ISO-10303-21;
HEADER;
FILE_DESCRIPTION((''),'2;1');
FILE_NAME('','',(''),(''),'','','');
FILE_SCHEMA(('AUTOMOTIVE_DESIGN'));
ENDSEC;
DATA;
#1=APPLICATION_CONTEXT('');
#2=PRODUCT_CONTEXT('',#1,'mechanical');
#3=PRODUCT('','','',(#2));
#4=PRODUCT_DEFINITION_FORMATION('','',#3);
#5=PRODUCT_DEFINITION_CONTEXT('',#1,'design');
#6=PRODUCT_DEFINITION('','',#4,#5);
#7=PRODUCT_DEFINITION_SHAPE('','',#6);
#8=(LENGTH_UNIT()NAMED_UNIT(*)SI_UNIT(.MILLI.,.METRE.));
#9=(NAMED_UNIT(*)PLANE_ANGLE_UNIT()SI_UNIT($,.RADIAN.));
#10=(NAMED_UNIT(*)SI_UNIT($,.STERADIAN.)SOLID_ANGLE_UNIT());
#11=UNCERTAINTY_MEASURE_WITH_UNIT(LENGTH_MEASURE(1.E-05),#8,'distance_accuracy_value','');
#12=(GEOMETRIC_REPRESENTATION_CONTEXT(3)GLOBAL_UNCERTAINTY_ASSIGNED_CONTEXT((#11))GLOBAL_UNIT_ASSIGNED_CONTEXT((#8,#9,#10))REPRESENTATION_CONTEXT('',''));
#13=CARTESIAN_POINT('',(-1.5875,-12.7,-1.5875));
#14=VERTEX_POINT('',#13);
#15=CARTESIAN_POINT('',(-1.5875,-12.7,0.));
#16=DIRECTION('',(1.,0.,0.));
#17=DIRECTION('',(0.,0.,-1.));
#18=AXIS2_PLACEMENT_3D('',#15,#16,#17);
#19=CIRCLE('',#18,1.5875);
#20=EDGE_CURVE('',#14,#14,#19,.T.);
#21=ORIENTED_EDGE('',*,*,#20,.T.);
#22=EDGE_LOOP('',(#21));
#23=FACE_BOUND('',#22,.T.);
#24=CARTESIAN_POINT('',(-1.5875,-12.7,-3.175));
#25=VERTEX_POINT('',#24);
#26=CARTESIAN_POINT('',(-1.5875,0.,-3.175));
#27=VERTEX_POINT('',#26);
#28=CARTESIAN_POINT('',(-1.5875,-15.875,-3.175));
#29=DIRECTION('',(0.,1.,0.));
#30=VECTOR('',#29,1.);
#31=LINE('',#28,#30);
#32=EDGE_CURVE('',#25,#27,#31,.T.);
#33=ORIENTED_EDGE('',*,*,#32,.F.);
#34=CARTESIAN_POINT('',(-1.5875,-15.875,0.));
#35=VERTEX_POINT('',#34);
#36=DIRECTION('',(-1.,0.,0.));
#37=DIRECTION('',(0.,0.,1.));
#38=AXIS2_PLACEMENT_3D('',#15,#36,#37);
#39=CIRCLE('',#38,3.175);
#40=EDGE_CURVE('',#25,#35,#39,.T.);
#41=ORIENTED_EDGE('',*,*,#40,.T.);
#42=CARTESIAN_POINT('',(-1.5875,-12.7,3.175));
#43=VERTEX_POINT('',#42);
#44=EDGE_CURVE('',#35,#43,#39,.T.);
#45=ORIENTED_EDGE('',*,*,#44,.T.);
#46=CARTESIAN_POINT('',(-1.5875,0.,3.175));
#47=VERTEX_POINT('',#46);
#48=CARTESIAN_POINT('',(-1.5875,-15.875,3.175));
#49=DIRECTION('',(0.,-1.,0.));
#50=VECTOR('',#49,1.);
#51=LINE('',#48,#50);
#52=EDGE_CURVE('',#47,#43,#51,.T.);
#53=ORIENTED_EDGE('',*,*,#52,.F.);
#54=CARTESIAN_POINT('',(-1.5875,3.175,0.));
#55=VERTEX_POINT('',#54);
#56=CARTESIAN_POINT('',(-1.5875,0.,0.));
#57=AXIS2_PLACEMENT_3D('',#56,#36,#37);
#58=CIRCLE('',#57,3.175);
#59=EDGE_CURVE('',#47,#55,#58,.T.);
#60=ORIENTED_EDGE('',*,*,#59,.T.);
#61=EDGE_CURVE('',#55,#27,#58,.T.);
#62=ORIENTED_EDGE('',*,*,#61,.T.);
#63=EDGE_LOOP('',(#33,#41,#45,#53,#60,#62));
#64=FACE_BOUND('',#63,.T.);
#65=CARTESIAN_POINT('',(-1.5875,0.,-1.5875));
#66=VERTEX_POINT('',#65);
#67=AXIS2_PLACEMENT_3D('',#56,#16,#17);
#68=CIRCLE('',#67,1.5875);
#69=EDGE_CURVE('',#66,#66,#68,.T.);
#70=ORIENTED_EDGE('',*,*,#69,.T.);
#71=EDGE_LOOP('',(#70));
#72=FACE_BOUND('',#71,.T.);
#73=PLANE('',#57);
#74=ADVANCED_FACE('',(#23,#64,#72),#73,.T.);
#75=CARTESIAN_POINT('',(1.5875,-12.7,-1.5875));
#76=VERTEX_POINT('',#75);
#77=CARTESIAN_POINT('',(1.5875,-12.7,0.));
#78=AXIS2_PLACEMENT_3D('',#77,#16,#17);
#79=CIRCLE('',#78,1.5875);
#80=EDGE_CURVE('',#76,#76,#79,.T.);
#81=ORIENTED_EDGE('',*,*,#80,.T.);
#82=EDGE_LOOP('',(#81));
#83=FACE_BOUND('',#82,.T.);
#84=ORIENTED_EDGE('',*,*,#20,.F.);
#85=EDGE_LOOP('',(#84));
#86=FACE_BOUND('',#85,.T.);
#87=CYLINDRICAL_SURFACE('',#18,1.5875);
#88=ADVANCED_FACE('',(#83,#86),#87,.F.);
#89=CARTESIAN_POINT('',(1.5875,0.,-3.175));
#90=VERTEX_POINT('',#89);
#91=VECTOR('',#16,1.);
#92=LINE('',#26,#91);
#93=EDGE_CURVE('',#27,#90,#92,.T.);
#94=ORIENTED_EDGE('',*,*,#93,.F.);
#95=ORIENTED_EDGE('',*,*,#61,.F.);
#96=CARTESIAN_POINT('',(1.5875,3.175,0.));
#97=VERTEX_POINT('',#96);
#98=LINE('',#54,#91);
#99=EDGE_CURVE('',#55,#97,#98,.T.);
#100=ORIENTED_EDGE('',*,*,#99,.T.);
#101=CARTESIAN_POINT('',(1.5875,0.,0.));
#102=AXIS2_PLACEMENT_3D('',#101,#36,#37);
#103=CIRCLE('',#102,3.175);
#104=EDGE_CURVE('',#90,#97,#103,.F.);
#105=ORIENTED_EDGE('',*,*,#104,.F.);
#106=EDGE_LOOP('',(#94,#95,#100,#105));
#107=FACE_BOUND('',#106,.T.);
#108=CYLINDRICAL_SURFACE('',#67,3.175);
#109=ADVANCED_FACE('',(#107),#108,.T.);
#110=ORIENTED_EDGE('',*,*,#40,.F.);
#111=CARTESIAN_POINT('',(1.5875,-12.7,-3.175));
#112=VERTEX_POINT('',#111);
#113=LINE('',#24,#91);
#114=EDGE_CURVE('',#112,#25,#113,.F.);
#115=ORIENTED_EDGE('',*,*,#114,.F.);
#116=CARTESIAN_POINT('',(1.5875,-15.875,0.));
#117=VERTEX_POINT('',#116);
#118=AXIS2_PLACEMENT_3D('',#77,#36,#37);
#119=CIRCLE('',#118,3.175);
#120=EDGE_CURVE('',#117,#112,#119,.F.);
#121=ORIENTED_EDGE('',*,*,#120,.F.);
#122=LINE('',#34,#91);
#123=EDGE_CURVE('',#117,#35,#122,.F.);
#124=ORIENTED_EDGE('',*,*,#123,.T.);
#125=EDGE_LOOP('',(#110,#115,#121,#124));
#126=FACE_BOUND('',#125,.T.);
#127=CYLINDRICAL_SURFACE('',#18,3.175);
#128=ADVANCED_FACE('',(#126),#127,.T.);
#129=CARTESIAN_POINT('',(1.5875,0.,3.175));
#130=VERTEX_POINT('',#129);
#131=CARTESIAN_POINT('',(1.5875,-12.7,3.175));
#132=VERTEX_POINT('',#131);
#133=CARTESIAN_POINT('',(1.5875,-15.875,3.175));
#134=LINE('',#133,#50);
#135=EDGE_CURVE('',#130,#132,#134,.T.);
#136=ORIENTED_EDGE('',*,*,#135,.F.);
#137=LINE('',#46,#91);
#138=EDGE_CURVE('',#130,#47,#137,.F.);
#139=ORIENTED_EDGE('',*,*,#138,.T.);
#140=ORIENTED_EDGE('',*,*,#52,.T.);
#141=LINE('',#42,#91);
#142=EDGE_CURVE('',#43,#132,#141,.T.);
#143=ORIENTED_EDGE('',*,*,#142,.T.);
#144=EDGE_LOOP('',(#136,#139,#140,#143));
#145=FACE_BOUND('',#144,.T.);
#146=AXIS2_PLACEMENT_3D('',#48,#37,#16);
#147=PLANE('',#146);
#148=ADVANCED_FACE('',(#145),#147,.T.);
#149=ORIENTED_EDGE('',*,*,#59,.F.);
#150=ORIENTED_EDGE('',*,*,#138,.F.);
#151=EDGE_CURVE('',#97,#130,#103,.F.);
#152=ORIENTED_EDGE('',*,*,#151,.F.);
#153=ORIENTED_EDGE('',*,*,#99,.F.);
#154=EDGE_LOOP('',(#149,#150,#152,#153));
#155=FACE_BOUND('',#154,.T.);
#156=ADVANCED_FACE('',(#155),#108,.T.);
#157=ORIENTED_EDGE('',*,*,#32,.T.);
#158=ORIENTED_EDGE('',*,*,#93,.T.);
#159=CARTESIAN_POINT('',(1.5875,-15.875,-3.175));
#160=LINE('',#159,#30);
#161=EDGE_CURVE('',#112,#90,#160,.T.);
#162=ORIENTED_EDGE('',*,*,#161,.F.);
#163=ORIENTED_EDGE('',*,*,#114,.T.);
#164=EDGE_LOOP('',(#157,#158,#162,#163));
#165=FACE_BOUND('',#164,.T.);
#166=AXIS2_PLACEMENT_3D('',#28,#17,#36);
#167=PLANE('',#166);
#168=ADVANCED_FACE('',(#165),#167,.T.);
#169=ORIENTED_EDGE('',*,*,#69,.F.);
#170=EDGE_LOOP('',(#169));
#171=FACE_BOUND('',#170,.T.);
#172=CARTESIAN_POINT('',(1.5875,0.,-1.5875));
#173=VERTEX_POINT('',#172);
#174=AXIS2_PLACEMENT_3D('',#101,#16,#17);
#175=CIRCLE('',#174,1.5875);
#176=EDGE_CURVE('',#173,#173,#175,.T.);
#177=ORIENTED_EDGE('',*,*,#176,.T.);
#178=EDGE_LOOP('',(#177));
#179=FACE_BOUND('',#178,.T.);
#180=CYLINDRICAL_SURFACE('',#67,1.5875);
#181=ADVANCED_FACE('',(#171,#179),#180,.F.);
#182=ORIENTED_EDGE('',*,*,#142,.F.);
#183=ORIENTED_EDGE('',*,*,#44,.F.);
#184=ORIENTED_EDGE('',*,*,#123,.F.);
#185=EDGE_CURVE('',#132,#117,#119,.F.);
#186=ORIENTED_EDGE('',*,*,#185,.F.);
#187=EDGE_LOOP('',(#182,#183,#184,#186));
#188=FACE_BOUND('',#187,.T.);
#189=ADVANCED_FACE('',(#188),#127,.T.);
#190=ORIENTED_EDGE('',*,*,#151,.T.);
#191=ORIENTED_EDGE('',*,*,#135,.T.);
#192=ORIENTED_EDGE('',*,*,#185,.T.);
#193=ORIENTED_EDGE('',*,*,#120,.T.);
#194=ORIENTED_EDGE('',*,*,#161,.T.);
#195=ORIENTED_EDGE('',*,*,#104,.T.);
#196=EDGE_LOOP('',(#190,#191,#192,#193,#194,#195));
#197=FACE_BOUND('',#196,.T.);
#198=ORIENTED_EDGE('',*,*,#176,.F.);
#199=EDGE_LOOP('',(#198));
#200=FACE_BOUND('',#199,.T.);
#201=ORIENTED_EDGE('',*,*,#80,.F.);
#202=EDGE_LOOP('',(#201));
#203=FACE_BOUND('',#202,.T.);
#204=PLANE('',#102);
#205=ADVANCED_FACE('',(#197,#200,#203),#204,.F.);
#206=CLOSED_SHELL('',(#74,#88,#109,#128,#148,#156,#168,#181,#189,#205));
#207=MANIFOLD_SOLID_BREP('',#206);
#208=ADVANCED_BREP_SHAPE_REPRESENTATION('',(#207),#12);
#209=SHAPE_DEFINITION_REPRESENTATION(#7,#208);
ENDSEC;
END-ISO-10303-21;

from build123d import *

# Parameters (mm, degrees)
BOSS_EXTRUDE1_DEPTH      = 1.5875
BOSS_EXTRUDE1_DEPTH_BACK = 1.5875
SKETCH1_W                = 6.35
SKETCH1_H                = 19.05
SKETCH1_R                = 1.5875
FILLET1_R                = 3.175


with BuildPart() as part:
    # Sketch1 → Boss-Extrude1 (new, two sides: drawn at the far end of the back side and taken through both)
    with BuildSketch(Plane(origin=(0, 0, 0), x_dir=(0, 0, -1), z_dir=(1, 0, 0)).offset(-BOSS_EXTRUDE1_DEPTH_BACK)):
        with Locations((0, -6.35)):
            Rectangle(SKETCH1_W, SKETCH1_H)
        Circle(SKETCH1_R, mode=Mode.SUBTRACT)
        with Locations((0, -12.7)):
            Circle(SKETCH1_R, mode=Mode.SUBTRACT)
    extrude(amount=BOSS_EXTRUDE1_DEPTH + BOSS_EXTRUDE1_DEPTH_BACK)

    # Fillet1
    fillet1_edges = [part.edges().sort_by_distance(p)[0] for p in [
        (0, -15.875, -3.175),
        (0, -15.875, 3.175),
        (0, 3.175, -3.175),
        (0, 3.175, 3.175),
    ]]
    fillet(fillet1_edges, radius=FILLET1_R - 0.0001)  # a hair under: the kernel refuses the full size


solid = part.part
